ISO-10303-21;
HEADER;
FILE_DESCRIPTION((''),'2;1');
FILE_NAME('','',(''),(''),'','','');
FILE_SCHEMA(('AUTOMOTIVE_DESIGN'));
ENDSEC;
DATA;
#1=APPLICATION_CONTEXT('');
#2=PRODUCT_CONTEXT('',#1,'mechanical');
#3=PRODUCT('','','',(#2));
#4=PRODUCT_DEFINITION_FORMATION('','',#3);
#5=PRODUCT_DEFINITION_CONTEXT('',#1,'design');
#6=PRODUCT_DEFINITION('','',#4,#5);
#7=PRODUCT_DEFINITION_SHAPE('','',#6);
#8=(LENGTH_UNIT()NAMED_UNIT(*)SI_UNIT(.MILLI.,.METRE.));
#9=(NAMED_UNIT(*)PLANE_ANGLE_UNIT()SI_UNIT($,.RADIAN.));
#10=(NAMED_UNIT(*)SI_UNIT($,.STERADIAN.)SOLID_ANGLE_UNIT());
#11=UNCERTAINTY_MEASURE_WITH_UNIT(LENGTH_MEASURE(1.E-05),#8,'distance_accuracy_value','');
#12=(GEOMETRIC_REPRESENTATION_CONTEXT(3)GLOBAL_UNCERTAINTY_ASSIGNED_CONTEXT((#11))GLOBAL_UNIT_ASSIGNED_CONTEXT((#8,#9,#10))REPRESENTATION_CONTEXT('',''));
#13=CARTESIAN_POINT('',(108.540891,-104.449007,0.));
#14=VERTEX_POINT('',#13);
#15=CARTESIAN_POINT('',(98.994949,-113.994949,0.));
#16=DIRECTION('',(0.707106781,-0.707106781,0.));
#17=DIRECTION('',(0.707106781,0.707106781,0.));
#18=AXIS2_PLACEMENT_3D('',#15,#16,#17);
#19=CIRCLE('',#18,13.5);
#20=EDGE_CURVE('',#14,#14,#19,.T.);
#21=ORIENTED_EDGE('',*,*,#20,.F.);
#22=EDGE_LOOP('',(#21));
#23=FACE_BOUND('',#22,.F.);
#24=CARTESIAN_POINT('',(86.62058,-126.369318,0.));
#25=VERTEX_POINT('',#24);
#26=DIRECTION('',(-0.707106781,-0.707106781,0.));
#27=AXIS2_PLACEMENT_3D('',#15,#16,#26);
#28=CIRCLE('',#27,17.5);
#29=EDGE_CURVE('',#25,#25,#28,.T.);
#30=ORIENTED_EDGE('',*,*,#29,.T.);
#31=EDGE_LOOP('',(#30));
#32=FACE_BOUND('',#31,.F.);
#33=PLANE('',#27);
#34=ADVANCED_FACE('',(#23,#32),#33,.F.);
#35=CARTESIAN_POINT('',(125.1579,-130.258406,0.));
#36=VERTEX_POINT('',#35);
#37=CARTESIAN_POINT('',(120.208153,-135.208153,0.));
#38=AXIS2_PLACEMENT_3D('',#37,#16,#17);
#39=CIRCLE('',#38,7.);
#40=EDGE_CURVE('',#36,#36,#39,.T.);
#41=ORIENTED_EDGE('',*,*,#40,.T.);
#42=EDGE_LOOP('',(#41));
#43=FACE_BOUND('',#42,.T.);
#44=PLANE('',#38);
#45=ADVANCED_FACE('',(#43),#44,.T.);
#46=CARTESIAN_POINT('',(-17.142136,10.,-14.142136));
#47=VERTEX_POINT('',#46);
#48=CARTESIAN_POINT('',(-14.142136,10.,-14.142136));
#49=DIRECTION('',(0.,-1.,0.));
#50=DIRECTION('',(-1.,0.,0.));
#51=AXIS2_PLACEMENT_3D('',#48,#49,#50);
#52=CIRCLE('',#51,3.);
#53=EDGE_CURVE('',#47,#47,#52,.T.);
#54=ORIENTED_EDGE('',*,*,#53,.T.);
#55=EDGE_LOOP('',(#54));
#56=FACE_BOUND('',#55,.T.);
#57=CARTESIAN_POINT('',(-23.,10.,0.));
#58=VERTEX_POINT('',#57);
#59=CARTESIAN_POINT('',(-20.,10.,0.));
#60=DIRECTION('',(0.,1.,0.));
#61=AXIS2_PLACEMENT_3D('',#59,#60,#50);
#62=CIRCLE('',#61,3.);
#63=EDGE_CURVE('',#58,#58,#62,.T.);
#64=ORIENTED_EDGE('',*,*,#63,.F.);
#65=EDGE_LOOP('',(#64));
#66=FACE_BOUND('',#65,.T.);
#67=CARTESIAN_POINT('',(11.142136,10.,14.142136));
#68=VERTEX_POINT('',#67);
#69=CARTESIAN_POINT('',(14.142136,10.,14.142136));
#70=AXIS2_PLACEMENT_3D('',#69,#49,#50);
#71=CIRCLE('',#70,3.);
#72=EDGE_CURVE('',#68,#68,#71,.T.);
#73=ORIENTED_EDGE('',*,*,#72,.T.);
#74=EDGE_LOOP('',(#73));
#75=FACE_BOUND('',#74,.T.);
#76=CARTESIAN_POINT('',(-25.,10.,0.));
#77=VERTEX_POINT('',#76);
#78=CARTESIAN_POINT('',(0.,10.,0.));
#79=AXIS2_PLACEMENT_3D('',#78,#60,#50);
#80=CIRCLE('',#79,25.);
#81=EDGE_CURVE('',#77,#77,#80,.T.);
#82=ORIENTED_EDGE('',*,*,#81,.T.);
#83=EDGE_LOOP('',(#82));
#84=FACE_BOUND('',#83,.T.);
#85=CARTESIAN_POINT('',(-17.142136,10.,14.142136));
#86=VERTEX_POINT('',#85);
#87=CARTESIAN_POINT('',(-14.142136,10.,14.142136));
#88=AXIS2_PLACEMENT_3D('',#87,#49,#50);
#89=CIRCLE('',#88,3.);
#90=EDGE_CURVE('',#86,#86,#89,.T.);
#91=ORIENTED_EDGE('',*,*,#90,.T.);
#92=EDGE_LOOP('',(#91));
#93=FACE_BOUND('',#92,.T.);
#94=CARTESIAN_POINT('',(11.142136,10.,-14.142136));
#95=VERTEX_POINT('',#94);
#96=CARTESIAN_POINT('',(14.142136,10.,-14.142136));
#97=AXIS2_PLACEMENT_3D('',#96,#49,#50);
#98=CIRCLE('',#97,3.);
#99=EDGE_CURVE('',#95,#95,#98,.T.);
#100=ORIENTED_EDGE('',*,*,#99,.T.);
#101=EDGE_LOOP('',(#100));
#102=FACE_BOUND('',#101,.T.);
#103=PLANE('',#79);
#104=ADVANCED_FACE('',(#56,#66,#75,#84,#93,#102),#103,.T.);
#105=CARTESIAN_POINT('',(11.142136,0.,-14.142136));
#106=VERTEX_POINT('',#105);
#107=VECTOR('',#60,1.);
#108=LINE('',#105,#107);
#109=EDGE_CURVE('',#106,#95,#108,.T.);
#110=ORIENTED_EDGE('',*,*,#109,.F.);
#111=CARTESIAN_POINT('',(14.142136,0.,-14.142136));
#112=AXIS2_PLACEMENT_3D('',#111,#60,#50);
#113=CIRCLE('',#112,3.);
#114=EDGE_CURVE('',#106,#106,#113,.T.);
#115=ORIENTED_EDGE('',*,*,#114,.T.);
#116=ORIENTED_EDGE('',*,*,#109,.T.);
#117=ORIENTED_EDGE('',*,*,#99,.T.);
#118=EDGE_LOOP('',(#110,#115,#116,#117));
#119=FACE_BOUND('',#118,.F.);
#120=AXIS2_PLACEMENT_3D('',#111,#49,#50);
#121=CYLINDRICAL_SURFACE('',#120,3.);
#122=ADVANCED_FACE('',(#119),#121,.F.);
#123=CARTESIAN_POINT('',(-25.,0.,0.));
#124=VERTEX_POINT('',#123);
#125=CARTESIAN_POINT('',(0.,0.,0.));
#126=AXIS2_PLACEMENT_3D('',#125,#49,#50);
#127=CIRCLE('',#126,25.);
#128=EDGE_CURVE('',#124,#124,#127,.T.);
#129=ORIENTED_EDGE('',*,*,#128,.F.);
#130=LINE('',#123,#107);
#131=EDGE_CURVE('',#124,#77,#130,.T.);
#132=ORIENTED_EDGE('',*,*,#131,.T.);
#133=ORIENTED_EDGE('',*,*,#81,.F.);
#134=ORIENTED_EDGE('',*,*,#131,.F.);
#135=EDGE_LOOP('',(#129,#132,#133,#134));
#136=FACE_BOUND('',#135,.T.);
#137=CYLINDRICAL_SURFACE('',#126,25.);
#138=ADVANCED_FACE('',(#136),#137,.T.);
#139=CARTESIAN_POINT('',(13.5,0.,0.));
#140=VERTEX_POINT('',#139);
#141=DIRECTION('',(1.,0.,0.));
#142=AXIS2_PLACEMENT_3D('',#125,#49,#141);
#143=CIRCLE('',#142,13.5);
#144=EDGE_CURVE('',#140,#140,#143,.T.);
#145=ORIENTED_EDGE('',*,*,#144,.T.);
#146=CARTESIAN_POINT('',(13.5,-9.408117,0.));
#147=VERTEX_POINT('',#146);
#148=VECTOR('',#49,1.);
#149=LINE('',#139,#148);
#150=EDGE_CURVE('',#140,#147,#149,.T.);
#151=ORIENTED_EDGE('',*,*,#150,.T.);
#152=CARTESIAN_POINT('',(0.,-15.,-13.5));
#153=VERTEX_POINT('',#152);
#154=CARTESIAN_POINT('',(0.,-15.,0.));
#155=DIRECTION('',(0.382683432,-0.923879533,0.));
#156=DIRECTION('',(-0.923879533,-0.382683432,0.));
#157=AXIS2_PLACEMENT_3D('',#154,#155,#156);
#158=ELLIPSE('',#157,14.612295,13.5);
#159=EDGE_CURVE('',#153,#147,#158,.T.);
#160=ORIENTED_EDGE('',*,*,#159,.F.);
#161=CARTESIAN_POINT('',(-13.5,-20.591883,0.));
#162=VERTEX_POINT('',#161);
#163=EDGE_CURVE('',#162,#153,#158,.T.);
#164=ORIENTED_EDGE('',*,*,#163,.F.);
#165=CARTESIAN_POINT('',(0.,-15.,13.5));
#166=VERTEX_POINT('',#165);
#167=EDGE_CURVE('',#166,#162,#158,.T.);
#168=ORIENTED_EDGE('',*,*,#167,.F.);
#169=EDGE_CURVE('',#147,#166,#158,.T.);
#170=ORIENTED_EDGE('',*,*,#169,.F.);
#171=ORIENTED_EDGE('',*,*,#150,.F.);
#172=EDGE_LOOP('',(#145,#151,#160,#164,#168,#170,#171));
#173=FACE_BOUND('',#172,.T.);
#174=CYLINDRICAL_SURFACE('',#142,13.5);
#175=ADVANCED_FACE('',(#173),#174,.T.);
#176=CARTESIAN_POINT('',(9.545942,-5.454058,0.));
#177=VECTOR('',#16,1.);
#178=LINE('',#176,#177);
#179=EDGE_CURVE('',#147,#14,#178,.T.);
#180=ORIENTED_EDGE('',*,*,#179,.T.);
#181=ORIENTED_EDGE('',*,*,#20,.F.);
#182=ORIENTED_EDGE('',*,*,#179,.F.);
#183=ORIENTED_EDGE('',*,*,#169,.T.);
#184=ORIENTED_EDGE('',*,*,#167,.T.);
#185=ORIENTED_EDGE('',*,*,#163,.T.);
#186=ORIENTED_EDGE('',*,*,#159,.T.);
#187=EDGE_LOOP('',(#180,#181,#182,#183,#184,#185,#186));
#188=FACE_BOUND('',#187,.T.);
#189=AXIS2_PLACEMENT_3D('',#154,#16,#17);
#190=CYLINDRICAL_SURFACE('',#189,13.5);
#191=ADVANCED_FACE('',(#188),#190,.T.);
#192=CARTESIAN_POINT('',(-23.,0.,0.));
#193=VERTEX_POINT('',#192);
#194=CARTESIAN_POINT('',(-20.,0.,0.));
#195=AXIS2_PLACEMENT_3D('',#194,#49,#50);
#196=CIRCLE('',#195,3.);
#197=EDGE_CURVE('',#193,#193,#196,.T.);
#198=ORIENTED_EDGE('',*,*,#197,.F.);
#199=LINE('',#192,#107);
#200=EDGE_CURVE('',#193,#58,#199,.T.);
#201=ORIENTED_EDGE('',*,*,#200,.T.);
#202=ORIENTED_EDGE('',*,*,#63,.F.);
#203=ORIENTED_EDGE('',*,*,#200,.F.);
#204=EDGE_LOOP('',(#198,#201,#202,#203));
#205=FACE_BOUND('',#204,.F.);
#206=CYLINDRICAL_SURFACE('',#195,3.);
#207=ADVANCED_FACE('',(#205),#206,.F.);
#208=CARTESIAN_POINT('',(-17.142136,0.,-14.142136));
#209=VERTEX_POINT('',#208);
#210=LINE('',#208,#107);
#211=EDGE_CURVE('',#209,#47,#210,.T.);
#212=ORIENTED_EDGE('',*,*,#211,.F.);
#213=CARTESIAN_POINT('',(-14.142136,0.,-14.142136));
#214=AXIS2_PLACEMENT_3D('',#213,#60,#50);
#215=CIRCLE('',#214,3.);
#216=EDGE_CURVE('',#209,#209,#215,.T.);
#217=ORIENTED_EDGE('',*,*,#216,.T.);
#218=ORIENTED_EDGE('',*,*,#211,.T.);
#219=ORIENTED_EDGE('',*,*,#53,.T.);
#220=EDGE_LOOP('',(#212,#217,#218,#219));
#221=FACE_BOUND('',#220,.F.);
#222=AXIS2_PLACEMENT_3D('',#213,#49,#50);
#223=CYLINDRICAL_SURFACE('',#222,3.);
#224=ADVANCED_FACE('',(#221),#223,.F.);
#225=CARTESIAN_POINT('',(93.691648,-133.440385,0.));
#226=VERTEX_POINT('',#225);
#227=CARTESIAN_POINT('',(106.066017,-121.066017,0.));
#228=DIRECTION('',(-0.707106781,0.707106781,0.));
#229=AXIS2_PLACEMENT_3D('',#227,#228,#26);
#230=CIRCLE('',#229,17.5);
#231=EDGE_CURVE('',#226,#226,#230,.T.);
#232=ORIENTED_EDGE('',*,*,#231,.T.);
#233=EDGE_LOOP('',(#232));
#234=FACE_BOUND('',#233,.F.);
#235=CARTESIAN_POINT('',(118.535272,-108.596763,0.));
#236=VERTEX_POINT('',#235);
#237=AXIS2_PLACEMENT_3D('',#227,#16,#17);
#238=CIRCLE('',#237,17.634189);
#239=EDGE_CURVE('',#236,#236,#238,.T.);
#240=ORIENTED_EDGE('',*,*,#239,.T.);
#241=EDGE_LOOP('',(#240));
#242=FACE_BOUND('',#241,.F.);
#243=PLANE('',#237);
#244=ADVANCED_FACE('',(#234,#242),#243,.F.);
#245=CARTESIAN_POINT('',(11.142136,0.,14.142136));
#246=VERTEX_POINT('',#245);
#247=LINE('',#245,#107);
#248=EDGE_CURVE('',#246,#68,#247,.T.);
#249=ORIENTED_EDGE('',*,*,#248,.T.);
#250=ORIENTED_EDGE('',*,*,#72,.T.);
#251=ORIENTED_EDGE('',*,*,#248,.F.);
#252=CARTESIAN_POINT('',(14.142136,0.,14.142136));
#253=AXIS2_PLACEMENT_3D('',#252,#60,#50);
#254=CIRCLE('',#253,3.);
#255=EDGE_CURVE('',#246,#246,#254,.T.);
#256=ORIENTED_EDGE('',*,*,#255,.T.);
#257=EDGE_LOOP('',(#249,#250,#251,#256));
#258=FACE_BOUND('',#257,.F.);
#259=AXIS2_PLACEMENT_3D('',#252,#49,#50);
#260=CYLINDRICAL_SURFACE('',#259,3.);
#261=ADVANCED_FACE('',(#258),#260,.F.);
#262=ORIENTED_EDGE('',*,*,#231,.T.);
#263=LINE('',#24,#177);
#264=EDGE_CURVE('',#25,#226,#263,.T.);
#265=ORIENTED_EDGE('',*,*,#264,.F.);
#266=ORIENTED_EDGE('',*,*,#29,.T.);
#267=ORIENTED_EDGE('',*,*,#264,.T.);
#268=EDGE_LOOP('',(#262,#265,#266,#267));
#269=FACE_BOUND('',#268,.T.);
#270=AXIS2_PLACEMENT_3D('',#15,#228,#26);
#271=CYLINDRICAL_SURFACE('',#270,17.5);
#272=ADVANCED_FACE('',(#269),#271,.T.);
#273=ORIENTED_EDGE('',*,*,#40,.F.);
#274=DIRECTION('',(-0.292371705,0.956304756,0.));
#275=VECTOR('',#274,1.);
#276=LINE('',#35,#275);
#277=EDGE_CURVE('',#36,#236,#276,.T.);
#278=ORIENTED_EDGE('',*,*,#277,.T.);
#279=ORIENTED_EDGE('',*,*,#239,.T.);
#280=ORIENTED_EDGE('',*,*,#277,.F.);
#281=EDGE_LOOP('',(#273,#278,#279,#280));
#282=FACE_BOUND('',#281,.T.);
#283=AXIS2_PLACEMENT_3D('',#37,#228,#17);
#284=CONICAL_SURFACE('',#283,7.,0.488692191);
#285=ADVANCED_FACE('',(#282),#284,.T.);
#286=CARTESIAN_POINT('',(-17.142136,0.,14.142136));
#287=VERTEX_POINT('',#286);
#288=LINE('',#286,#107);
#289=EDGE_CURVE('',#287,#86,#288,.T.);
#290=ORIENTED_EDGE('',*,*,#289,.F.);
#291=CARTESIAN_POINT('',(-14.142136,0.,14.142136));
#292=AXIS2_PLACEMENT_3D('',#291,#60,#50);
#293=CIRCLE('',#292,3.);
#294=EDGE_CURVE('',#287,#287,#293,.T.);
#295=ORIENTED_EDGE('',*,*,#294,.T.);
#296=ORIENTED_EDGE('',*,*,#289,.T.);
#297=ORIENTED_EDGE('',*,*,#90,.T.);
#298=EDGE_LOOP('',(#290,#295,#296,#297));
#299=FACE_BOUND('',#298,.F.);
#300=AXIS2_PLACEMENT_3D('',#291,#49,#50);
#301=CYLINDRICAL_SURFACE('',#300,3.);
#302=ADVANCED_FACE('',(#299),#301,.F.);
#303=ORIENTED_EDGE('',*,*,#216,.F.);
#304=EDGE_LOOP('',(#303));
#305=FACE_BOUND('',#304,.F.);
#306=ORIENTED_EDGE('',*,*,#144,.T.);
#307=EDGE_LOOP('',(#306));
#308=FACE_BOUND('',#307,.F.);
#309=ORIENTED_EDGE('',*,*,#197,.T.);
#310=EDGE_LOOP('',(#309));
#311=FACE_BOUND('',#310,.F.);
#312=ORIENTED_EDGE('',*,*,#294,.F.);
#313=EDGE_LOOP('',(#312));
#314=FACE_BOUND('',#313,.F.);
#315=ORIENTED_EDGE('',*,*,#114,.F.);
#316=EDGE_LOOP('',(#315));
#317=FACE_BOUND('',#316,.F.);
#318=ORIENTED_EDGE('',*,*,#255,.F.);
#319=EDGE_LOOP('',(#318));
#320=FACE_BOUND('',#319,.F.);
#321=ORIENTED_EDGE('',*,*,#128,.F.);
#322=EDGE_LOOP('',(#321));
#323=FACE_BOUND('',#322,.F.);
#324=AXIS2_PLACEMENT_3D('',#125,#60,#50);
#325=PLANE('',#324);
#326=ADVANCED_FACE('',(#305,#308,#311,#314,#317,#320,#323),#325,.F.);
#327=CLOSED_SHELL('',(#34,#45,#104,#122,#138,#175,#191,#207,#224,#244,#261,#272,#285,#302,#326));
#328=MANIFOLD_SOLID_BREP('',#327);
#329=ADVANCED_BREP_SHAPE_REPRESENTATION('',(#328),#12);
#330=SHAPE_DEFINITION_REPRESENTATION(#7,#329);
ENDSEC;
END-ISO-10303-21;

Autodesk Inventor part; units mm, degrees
ref_plane "YZ Plane" through (0, 0, 0) normal (1, 0, 0) x (0, 1, 0)
ref_plane "XZ Plane" through (0, 0, 0) normal (0, 1, 0) x (-1, 0, 0)
ref_plane "XY Plane" through (0, 0, 0) normal (0, 0, 1) x (1, 0, 0)
sketch "Boceto1" plane through (0, 0, 0) normal (0, 1, 0) x (-1, 0, 0)
  circle A0 centre (0, 0) radius 25
  circle A1 centre (0, 0) radius 20
  line L0 (0, 0) -> (25, 0)
  line L1 (0, 0) -> (17.67767, -17.67767)
  line L2 (0, 0) -> (25, 0) construction
  line L3 (0, 0) -> (17.67767, 17.67767)
  line L4 (0, 0) -> (25, 0) construction
  line L5 (0, 0) -> (-17.67767, -17.67767)
  line L6 (0, 0) -> (-17.67767, 17.67767)
  circle A2 centre (20, 0) radius 3
  circle A3 centre (14.142136, -14.142136) radius 3
  circle A4 centre (14.142136, 14.142136) radius 3
  circle A5 centre (-14.142136, 14.142136) radius 3
  circle A6 centre (-14.142136, -14.142136) radius 3
  point P0 (16.098382, 11.867691)
  point P1 (11.867691, 16.098382)
  dimension "d0" = 50
  dimension "d1" = 40
  dimension "d2" = 45
  dimension "d3" = 45
  dimension "d4" = 6
  dimension "d5" = 6
  dimension "d6" = 6
  dimension "d7" = 6
  dimension "d8" = 6
extrude "Extrusión1" add sketch "Boceto1" along normal blind 10 contours L0 A2 A1 A4 L3 A0 | A0 L1 A3 A1 A2 L0 | L3 A4 A1 A5 L6 A0 | A0 L5 A6 A1 A3 L1 | L6 A5 A1 A6 L5 A0 | A2 L0 L3 A4 A1 | A1 A3 L1 L0 A2 | A4 L3 L6 A5 A1 | A1 A6 L5 L1 A3 | A5 L6 L5 A6 A1
thread "Rosca1"
thread "Rosca2"
thread "Rosca3"
thread "Rosca4"
sketch "Boceto7" plane through (0, 0, 0) normal (0, 0, 1) x (1, 0, 0)
  line L0 (0, 0) -> (0, -15)
  line L1 (0, -15) -> (98.994949, -113.994949)
  dimension "d31" = 15
  dimension "d32" = 140
  dimension "d33" = 135
sketch "Boceto8" plane through (0, 0, 0) normal (0, -1, 0) x (1, 0, 0)
  circle A0 centre (0, 0) radius 13.5
  dimension "d34" = 27
sweep "Barrido1" add profiles "Boceto8" path "Boceto7"
sketch "Boceto13" plane through (0, 0, 0) normal (0, 0, 1) x (1, 0, 0)
  line L0 (0, 0) -> (0, -15)
  line L1 (0, -15) -> (120.208153, -135.208153)
  dimension "d48" = 170
  dimension "d49" = 135
sketch "Boceto14" plane through (98.994949, -113.994949, 0) normal (0.7071068, -0.7071068, 0) x (-0.7071068, -0.7071068, 0)
  ellipse E0 centre (-17.67767, 0) end of major axis (-17.67767, -25) minor radius 17.67767
  circle A0 centre (0, 0) radius 17.5
  point P0 (-10.606602, 0)
  dimension "d50" = 35
extrude "Extrusión9" add sketch "Boceto14" along normal blind 10 contours A0 E0 | E0 A0 picked at (-5.916701, -1.209366) picked at (5.555683, -1.849173)
ref_plane "Plano de trabajo1" through (120.208153, -135.208153, 0) normal (0.7071068, -0.7071068, 0) x (0.7071068, 0.7071068, 0)
sketch "Boceto16" plane through (120.208153, -135.208153, 0) normal (0.7071068, -0.7071068, 0) x (0.7071068, 0.7071068, 0)
  ellipse E0 centre (17.67767, 0) end of major axis (17.67767, 25) minor radius 17.67767
  circle A0 centre (0, 0) radius 7
  point P0 (10.606602, 0)
  dimension "d58" = 14
sketch "Boceto16 outline for Extrusión10" plane through (120.208153, -135.208153, 0) normal (0.7071068, -0.7071068, 0) x (0.7071068, 0.7071068, 0)
  circle A0 centre (0, 0) radius 7
extrude "Extrusión10" add sketch "Boceto16 outline for Extrusión10" against normal blind 20 draft 28
properties part number "Herramienta total"
